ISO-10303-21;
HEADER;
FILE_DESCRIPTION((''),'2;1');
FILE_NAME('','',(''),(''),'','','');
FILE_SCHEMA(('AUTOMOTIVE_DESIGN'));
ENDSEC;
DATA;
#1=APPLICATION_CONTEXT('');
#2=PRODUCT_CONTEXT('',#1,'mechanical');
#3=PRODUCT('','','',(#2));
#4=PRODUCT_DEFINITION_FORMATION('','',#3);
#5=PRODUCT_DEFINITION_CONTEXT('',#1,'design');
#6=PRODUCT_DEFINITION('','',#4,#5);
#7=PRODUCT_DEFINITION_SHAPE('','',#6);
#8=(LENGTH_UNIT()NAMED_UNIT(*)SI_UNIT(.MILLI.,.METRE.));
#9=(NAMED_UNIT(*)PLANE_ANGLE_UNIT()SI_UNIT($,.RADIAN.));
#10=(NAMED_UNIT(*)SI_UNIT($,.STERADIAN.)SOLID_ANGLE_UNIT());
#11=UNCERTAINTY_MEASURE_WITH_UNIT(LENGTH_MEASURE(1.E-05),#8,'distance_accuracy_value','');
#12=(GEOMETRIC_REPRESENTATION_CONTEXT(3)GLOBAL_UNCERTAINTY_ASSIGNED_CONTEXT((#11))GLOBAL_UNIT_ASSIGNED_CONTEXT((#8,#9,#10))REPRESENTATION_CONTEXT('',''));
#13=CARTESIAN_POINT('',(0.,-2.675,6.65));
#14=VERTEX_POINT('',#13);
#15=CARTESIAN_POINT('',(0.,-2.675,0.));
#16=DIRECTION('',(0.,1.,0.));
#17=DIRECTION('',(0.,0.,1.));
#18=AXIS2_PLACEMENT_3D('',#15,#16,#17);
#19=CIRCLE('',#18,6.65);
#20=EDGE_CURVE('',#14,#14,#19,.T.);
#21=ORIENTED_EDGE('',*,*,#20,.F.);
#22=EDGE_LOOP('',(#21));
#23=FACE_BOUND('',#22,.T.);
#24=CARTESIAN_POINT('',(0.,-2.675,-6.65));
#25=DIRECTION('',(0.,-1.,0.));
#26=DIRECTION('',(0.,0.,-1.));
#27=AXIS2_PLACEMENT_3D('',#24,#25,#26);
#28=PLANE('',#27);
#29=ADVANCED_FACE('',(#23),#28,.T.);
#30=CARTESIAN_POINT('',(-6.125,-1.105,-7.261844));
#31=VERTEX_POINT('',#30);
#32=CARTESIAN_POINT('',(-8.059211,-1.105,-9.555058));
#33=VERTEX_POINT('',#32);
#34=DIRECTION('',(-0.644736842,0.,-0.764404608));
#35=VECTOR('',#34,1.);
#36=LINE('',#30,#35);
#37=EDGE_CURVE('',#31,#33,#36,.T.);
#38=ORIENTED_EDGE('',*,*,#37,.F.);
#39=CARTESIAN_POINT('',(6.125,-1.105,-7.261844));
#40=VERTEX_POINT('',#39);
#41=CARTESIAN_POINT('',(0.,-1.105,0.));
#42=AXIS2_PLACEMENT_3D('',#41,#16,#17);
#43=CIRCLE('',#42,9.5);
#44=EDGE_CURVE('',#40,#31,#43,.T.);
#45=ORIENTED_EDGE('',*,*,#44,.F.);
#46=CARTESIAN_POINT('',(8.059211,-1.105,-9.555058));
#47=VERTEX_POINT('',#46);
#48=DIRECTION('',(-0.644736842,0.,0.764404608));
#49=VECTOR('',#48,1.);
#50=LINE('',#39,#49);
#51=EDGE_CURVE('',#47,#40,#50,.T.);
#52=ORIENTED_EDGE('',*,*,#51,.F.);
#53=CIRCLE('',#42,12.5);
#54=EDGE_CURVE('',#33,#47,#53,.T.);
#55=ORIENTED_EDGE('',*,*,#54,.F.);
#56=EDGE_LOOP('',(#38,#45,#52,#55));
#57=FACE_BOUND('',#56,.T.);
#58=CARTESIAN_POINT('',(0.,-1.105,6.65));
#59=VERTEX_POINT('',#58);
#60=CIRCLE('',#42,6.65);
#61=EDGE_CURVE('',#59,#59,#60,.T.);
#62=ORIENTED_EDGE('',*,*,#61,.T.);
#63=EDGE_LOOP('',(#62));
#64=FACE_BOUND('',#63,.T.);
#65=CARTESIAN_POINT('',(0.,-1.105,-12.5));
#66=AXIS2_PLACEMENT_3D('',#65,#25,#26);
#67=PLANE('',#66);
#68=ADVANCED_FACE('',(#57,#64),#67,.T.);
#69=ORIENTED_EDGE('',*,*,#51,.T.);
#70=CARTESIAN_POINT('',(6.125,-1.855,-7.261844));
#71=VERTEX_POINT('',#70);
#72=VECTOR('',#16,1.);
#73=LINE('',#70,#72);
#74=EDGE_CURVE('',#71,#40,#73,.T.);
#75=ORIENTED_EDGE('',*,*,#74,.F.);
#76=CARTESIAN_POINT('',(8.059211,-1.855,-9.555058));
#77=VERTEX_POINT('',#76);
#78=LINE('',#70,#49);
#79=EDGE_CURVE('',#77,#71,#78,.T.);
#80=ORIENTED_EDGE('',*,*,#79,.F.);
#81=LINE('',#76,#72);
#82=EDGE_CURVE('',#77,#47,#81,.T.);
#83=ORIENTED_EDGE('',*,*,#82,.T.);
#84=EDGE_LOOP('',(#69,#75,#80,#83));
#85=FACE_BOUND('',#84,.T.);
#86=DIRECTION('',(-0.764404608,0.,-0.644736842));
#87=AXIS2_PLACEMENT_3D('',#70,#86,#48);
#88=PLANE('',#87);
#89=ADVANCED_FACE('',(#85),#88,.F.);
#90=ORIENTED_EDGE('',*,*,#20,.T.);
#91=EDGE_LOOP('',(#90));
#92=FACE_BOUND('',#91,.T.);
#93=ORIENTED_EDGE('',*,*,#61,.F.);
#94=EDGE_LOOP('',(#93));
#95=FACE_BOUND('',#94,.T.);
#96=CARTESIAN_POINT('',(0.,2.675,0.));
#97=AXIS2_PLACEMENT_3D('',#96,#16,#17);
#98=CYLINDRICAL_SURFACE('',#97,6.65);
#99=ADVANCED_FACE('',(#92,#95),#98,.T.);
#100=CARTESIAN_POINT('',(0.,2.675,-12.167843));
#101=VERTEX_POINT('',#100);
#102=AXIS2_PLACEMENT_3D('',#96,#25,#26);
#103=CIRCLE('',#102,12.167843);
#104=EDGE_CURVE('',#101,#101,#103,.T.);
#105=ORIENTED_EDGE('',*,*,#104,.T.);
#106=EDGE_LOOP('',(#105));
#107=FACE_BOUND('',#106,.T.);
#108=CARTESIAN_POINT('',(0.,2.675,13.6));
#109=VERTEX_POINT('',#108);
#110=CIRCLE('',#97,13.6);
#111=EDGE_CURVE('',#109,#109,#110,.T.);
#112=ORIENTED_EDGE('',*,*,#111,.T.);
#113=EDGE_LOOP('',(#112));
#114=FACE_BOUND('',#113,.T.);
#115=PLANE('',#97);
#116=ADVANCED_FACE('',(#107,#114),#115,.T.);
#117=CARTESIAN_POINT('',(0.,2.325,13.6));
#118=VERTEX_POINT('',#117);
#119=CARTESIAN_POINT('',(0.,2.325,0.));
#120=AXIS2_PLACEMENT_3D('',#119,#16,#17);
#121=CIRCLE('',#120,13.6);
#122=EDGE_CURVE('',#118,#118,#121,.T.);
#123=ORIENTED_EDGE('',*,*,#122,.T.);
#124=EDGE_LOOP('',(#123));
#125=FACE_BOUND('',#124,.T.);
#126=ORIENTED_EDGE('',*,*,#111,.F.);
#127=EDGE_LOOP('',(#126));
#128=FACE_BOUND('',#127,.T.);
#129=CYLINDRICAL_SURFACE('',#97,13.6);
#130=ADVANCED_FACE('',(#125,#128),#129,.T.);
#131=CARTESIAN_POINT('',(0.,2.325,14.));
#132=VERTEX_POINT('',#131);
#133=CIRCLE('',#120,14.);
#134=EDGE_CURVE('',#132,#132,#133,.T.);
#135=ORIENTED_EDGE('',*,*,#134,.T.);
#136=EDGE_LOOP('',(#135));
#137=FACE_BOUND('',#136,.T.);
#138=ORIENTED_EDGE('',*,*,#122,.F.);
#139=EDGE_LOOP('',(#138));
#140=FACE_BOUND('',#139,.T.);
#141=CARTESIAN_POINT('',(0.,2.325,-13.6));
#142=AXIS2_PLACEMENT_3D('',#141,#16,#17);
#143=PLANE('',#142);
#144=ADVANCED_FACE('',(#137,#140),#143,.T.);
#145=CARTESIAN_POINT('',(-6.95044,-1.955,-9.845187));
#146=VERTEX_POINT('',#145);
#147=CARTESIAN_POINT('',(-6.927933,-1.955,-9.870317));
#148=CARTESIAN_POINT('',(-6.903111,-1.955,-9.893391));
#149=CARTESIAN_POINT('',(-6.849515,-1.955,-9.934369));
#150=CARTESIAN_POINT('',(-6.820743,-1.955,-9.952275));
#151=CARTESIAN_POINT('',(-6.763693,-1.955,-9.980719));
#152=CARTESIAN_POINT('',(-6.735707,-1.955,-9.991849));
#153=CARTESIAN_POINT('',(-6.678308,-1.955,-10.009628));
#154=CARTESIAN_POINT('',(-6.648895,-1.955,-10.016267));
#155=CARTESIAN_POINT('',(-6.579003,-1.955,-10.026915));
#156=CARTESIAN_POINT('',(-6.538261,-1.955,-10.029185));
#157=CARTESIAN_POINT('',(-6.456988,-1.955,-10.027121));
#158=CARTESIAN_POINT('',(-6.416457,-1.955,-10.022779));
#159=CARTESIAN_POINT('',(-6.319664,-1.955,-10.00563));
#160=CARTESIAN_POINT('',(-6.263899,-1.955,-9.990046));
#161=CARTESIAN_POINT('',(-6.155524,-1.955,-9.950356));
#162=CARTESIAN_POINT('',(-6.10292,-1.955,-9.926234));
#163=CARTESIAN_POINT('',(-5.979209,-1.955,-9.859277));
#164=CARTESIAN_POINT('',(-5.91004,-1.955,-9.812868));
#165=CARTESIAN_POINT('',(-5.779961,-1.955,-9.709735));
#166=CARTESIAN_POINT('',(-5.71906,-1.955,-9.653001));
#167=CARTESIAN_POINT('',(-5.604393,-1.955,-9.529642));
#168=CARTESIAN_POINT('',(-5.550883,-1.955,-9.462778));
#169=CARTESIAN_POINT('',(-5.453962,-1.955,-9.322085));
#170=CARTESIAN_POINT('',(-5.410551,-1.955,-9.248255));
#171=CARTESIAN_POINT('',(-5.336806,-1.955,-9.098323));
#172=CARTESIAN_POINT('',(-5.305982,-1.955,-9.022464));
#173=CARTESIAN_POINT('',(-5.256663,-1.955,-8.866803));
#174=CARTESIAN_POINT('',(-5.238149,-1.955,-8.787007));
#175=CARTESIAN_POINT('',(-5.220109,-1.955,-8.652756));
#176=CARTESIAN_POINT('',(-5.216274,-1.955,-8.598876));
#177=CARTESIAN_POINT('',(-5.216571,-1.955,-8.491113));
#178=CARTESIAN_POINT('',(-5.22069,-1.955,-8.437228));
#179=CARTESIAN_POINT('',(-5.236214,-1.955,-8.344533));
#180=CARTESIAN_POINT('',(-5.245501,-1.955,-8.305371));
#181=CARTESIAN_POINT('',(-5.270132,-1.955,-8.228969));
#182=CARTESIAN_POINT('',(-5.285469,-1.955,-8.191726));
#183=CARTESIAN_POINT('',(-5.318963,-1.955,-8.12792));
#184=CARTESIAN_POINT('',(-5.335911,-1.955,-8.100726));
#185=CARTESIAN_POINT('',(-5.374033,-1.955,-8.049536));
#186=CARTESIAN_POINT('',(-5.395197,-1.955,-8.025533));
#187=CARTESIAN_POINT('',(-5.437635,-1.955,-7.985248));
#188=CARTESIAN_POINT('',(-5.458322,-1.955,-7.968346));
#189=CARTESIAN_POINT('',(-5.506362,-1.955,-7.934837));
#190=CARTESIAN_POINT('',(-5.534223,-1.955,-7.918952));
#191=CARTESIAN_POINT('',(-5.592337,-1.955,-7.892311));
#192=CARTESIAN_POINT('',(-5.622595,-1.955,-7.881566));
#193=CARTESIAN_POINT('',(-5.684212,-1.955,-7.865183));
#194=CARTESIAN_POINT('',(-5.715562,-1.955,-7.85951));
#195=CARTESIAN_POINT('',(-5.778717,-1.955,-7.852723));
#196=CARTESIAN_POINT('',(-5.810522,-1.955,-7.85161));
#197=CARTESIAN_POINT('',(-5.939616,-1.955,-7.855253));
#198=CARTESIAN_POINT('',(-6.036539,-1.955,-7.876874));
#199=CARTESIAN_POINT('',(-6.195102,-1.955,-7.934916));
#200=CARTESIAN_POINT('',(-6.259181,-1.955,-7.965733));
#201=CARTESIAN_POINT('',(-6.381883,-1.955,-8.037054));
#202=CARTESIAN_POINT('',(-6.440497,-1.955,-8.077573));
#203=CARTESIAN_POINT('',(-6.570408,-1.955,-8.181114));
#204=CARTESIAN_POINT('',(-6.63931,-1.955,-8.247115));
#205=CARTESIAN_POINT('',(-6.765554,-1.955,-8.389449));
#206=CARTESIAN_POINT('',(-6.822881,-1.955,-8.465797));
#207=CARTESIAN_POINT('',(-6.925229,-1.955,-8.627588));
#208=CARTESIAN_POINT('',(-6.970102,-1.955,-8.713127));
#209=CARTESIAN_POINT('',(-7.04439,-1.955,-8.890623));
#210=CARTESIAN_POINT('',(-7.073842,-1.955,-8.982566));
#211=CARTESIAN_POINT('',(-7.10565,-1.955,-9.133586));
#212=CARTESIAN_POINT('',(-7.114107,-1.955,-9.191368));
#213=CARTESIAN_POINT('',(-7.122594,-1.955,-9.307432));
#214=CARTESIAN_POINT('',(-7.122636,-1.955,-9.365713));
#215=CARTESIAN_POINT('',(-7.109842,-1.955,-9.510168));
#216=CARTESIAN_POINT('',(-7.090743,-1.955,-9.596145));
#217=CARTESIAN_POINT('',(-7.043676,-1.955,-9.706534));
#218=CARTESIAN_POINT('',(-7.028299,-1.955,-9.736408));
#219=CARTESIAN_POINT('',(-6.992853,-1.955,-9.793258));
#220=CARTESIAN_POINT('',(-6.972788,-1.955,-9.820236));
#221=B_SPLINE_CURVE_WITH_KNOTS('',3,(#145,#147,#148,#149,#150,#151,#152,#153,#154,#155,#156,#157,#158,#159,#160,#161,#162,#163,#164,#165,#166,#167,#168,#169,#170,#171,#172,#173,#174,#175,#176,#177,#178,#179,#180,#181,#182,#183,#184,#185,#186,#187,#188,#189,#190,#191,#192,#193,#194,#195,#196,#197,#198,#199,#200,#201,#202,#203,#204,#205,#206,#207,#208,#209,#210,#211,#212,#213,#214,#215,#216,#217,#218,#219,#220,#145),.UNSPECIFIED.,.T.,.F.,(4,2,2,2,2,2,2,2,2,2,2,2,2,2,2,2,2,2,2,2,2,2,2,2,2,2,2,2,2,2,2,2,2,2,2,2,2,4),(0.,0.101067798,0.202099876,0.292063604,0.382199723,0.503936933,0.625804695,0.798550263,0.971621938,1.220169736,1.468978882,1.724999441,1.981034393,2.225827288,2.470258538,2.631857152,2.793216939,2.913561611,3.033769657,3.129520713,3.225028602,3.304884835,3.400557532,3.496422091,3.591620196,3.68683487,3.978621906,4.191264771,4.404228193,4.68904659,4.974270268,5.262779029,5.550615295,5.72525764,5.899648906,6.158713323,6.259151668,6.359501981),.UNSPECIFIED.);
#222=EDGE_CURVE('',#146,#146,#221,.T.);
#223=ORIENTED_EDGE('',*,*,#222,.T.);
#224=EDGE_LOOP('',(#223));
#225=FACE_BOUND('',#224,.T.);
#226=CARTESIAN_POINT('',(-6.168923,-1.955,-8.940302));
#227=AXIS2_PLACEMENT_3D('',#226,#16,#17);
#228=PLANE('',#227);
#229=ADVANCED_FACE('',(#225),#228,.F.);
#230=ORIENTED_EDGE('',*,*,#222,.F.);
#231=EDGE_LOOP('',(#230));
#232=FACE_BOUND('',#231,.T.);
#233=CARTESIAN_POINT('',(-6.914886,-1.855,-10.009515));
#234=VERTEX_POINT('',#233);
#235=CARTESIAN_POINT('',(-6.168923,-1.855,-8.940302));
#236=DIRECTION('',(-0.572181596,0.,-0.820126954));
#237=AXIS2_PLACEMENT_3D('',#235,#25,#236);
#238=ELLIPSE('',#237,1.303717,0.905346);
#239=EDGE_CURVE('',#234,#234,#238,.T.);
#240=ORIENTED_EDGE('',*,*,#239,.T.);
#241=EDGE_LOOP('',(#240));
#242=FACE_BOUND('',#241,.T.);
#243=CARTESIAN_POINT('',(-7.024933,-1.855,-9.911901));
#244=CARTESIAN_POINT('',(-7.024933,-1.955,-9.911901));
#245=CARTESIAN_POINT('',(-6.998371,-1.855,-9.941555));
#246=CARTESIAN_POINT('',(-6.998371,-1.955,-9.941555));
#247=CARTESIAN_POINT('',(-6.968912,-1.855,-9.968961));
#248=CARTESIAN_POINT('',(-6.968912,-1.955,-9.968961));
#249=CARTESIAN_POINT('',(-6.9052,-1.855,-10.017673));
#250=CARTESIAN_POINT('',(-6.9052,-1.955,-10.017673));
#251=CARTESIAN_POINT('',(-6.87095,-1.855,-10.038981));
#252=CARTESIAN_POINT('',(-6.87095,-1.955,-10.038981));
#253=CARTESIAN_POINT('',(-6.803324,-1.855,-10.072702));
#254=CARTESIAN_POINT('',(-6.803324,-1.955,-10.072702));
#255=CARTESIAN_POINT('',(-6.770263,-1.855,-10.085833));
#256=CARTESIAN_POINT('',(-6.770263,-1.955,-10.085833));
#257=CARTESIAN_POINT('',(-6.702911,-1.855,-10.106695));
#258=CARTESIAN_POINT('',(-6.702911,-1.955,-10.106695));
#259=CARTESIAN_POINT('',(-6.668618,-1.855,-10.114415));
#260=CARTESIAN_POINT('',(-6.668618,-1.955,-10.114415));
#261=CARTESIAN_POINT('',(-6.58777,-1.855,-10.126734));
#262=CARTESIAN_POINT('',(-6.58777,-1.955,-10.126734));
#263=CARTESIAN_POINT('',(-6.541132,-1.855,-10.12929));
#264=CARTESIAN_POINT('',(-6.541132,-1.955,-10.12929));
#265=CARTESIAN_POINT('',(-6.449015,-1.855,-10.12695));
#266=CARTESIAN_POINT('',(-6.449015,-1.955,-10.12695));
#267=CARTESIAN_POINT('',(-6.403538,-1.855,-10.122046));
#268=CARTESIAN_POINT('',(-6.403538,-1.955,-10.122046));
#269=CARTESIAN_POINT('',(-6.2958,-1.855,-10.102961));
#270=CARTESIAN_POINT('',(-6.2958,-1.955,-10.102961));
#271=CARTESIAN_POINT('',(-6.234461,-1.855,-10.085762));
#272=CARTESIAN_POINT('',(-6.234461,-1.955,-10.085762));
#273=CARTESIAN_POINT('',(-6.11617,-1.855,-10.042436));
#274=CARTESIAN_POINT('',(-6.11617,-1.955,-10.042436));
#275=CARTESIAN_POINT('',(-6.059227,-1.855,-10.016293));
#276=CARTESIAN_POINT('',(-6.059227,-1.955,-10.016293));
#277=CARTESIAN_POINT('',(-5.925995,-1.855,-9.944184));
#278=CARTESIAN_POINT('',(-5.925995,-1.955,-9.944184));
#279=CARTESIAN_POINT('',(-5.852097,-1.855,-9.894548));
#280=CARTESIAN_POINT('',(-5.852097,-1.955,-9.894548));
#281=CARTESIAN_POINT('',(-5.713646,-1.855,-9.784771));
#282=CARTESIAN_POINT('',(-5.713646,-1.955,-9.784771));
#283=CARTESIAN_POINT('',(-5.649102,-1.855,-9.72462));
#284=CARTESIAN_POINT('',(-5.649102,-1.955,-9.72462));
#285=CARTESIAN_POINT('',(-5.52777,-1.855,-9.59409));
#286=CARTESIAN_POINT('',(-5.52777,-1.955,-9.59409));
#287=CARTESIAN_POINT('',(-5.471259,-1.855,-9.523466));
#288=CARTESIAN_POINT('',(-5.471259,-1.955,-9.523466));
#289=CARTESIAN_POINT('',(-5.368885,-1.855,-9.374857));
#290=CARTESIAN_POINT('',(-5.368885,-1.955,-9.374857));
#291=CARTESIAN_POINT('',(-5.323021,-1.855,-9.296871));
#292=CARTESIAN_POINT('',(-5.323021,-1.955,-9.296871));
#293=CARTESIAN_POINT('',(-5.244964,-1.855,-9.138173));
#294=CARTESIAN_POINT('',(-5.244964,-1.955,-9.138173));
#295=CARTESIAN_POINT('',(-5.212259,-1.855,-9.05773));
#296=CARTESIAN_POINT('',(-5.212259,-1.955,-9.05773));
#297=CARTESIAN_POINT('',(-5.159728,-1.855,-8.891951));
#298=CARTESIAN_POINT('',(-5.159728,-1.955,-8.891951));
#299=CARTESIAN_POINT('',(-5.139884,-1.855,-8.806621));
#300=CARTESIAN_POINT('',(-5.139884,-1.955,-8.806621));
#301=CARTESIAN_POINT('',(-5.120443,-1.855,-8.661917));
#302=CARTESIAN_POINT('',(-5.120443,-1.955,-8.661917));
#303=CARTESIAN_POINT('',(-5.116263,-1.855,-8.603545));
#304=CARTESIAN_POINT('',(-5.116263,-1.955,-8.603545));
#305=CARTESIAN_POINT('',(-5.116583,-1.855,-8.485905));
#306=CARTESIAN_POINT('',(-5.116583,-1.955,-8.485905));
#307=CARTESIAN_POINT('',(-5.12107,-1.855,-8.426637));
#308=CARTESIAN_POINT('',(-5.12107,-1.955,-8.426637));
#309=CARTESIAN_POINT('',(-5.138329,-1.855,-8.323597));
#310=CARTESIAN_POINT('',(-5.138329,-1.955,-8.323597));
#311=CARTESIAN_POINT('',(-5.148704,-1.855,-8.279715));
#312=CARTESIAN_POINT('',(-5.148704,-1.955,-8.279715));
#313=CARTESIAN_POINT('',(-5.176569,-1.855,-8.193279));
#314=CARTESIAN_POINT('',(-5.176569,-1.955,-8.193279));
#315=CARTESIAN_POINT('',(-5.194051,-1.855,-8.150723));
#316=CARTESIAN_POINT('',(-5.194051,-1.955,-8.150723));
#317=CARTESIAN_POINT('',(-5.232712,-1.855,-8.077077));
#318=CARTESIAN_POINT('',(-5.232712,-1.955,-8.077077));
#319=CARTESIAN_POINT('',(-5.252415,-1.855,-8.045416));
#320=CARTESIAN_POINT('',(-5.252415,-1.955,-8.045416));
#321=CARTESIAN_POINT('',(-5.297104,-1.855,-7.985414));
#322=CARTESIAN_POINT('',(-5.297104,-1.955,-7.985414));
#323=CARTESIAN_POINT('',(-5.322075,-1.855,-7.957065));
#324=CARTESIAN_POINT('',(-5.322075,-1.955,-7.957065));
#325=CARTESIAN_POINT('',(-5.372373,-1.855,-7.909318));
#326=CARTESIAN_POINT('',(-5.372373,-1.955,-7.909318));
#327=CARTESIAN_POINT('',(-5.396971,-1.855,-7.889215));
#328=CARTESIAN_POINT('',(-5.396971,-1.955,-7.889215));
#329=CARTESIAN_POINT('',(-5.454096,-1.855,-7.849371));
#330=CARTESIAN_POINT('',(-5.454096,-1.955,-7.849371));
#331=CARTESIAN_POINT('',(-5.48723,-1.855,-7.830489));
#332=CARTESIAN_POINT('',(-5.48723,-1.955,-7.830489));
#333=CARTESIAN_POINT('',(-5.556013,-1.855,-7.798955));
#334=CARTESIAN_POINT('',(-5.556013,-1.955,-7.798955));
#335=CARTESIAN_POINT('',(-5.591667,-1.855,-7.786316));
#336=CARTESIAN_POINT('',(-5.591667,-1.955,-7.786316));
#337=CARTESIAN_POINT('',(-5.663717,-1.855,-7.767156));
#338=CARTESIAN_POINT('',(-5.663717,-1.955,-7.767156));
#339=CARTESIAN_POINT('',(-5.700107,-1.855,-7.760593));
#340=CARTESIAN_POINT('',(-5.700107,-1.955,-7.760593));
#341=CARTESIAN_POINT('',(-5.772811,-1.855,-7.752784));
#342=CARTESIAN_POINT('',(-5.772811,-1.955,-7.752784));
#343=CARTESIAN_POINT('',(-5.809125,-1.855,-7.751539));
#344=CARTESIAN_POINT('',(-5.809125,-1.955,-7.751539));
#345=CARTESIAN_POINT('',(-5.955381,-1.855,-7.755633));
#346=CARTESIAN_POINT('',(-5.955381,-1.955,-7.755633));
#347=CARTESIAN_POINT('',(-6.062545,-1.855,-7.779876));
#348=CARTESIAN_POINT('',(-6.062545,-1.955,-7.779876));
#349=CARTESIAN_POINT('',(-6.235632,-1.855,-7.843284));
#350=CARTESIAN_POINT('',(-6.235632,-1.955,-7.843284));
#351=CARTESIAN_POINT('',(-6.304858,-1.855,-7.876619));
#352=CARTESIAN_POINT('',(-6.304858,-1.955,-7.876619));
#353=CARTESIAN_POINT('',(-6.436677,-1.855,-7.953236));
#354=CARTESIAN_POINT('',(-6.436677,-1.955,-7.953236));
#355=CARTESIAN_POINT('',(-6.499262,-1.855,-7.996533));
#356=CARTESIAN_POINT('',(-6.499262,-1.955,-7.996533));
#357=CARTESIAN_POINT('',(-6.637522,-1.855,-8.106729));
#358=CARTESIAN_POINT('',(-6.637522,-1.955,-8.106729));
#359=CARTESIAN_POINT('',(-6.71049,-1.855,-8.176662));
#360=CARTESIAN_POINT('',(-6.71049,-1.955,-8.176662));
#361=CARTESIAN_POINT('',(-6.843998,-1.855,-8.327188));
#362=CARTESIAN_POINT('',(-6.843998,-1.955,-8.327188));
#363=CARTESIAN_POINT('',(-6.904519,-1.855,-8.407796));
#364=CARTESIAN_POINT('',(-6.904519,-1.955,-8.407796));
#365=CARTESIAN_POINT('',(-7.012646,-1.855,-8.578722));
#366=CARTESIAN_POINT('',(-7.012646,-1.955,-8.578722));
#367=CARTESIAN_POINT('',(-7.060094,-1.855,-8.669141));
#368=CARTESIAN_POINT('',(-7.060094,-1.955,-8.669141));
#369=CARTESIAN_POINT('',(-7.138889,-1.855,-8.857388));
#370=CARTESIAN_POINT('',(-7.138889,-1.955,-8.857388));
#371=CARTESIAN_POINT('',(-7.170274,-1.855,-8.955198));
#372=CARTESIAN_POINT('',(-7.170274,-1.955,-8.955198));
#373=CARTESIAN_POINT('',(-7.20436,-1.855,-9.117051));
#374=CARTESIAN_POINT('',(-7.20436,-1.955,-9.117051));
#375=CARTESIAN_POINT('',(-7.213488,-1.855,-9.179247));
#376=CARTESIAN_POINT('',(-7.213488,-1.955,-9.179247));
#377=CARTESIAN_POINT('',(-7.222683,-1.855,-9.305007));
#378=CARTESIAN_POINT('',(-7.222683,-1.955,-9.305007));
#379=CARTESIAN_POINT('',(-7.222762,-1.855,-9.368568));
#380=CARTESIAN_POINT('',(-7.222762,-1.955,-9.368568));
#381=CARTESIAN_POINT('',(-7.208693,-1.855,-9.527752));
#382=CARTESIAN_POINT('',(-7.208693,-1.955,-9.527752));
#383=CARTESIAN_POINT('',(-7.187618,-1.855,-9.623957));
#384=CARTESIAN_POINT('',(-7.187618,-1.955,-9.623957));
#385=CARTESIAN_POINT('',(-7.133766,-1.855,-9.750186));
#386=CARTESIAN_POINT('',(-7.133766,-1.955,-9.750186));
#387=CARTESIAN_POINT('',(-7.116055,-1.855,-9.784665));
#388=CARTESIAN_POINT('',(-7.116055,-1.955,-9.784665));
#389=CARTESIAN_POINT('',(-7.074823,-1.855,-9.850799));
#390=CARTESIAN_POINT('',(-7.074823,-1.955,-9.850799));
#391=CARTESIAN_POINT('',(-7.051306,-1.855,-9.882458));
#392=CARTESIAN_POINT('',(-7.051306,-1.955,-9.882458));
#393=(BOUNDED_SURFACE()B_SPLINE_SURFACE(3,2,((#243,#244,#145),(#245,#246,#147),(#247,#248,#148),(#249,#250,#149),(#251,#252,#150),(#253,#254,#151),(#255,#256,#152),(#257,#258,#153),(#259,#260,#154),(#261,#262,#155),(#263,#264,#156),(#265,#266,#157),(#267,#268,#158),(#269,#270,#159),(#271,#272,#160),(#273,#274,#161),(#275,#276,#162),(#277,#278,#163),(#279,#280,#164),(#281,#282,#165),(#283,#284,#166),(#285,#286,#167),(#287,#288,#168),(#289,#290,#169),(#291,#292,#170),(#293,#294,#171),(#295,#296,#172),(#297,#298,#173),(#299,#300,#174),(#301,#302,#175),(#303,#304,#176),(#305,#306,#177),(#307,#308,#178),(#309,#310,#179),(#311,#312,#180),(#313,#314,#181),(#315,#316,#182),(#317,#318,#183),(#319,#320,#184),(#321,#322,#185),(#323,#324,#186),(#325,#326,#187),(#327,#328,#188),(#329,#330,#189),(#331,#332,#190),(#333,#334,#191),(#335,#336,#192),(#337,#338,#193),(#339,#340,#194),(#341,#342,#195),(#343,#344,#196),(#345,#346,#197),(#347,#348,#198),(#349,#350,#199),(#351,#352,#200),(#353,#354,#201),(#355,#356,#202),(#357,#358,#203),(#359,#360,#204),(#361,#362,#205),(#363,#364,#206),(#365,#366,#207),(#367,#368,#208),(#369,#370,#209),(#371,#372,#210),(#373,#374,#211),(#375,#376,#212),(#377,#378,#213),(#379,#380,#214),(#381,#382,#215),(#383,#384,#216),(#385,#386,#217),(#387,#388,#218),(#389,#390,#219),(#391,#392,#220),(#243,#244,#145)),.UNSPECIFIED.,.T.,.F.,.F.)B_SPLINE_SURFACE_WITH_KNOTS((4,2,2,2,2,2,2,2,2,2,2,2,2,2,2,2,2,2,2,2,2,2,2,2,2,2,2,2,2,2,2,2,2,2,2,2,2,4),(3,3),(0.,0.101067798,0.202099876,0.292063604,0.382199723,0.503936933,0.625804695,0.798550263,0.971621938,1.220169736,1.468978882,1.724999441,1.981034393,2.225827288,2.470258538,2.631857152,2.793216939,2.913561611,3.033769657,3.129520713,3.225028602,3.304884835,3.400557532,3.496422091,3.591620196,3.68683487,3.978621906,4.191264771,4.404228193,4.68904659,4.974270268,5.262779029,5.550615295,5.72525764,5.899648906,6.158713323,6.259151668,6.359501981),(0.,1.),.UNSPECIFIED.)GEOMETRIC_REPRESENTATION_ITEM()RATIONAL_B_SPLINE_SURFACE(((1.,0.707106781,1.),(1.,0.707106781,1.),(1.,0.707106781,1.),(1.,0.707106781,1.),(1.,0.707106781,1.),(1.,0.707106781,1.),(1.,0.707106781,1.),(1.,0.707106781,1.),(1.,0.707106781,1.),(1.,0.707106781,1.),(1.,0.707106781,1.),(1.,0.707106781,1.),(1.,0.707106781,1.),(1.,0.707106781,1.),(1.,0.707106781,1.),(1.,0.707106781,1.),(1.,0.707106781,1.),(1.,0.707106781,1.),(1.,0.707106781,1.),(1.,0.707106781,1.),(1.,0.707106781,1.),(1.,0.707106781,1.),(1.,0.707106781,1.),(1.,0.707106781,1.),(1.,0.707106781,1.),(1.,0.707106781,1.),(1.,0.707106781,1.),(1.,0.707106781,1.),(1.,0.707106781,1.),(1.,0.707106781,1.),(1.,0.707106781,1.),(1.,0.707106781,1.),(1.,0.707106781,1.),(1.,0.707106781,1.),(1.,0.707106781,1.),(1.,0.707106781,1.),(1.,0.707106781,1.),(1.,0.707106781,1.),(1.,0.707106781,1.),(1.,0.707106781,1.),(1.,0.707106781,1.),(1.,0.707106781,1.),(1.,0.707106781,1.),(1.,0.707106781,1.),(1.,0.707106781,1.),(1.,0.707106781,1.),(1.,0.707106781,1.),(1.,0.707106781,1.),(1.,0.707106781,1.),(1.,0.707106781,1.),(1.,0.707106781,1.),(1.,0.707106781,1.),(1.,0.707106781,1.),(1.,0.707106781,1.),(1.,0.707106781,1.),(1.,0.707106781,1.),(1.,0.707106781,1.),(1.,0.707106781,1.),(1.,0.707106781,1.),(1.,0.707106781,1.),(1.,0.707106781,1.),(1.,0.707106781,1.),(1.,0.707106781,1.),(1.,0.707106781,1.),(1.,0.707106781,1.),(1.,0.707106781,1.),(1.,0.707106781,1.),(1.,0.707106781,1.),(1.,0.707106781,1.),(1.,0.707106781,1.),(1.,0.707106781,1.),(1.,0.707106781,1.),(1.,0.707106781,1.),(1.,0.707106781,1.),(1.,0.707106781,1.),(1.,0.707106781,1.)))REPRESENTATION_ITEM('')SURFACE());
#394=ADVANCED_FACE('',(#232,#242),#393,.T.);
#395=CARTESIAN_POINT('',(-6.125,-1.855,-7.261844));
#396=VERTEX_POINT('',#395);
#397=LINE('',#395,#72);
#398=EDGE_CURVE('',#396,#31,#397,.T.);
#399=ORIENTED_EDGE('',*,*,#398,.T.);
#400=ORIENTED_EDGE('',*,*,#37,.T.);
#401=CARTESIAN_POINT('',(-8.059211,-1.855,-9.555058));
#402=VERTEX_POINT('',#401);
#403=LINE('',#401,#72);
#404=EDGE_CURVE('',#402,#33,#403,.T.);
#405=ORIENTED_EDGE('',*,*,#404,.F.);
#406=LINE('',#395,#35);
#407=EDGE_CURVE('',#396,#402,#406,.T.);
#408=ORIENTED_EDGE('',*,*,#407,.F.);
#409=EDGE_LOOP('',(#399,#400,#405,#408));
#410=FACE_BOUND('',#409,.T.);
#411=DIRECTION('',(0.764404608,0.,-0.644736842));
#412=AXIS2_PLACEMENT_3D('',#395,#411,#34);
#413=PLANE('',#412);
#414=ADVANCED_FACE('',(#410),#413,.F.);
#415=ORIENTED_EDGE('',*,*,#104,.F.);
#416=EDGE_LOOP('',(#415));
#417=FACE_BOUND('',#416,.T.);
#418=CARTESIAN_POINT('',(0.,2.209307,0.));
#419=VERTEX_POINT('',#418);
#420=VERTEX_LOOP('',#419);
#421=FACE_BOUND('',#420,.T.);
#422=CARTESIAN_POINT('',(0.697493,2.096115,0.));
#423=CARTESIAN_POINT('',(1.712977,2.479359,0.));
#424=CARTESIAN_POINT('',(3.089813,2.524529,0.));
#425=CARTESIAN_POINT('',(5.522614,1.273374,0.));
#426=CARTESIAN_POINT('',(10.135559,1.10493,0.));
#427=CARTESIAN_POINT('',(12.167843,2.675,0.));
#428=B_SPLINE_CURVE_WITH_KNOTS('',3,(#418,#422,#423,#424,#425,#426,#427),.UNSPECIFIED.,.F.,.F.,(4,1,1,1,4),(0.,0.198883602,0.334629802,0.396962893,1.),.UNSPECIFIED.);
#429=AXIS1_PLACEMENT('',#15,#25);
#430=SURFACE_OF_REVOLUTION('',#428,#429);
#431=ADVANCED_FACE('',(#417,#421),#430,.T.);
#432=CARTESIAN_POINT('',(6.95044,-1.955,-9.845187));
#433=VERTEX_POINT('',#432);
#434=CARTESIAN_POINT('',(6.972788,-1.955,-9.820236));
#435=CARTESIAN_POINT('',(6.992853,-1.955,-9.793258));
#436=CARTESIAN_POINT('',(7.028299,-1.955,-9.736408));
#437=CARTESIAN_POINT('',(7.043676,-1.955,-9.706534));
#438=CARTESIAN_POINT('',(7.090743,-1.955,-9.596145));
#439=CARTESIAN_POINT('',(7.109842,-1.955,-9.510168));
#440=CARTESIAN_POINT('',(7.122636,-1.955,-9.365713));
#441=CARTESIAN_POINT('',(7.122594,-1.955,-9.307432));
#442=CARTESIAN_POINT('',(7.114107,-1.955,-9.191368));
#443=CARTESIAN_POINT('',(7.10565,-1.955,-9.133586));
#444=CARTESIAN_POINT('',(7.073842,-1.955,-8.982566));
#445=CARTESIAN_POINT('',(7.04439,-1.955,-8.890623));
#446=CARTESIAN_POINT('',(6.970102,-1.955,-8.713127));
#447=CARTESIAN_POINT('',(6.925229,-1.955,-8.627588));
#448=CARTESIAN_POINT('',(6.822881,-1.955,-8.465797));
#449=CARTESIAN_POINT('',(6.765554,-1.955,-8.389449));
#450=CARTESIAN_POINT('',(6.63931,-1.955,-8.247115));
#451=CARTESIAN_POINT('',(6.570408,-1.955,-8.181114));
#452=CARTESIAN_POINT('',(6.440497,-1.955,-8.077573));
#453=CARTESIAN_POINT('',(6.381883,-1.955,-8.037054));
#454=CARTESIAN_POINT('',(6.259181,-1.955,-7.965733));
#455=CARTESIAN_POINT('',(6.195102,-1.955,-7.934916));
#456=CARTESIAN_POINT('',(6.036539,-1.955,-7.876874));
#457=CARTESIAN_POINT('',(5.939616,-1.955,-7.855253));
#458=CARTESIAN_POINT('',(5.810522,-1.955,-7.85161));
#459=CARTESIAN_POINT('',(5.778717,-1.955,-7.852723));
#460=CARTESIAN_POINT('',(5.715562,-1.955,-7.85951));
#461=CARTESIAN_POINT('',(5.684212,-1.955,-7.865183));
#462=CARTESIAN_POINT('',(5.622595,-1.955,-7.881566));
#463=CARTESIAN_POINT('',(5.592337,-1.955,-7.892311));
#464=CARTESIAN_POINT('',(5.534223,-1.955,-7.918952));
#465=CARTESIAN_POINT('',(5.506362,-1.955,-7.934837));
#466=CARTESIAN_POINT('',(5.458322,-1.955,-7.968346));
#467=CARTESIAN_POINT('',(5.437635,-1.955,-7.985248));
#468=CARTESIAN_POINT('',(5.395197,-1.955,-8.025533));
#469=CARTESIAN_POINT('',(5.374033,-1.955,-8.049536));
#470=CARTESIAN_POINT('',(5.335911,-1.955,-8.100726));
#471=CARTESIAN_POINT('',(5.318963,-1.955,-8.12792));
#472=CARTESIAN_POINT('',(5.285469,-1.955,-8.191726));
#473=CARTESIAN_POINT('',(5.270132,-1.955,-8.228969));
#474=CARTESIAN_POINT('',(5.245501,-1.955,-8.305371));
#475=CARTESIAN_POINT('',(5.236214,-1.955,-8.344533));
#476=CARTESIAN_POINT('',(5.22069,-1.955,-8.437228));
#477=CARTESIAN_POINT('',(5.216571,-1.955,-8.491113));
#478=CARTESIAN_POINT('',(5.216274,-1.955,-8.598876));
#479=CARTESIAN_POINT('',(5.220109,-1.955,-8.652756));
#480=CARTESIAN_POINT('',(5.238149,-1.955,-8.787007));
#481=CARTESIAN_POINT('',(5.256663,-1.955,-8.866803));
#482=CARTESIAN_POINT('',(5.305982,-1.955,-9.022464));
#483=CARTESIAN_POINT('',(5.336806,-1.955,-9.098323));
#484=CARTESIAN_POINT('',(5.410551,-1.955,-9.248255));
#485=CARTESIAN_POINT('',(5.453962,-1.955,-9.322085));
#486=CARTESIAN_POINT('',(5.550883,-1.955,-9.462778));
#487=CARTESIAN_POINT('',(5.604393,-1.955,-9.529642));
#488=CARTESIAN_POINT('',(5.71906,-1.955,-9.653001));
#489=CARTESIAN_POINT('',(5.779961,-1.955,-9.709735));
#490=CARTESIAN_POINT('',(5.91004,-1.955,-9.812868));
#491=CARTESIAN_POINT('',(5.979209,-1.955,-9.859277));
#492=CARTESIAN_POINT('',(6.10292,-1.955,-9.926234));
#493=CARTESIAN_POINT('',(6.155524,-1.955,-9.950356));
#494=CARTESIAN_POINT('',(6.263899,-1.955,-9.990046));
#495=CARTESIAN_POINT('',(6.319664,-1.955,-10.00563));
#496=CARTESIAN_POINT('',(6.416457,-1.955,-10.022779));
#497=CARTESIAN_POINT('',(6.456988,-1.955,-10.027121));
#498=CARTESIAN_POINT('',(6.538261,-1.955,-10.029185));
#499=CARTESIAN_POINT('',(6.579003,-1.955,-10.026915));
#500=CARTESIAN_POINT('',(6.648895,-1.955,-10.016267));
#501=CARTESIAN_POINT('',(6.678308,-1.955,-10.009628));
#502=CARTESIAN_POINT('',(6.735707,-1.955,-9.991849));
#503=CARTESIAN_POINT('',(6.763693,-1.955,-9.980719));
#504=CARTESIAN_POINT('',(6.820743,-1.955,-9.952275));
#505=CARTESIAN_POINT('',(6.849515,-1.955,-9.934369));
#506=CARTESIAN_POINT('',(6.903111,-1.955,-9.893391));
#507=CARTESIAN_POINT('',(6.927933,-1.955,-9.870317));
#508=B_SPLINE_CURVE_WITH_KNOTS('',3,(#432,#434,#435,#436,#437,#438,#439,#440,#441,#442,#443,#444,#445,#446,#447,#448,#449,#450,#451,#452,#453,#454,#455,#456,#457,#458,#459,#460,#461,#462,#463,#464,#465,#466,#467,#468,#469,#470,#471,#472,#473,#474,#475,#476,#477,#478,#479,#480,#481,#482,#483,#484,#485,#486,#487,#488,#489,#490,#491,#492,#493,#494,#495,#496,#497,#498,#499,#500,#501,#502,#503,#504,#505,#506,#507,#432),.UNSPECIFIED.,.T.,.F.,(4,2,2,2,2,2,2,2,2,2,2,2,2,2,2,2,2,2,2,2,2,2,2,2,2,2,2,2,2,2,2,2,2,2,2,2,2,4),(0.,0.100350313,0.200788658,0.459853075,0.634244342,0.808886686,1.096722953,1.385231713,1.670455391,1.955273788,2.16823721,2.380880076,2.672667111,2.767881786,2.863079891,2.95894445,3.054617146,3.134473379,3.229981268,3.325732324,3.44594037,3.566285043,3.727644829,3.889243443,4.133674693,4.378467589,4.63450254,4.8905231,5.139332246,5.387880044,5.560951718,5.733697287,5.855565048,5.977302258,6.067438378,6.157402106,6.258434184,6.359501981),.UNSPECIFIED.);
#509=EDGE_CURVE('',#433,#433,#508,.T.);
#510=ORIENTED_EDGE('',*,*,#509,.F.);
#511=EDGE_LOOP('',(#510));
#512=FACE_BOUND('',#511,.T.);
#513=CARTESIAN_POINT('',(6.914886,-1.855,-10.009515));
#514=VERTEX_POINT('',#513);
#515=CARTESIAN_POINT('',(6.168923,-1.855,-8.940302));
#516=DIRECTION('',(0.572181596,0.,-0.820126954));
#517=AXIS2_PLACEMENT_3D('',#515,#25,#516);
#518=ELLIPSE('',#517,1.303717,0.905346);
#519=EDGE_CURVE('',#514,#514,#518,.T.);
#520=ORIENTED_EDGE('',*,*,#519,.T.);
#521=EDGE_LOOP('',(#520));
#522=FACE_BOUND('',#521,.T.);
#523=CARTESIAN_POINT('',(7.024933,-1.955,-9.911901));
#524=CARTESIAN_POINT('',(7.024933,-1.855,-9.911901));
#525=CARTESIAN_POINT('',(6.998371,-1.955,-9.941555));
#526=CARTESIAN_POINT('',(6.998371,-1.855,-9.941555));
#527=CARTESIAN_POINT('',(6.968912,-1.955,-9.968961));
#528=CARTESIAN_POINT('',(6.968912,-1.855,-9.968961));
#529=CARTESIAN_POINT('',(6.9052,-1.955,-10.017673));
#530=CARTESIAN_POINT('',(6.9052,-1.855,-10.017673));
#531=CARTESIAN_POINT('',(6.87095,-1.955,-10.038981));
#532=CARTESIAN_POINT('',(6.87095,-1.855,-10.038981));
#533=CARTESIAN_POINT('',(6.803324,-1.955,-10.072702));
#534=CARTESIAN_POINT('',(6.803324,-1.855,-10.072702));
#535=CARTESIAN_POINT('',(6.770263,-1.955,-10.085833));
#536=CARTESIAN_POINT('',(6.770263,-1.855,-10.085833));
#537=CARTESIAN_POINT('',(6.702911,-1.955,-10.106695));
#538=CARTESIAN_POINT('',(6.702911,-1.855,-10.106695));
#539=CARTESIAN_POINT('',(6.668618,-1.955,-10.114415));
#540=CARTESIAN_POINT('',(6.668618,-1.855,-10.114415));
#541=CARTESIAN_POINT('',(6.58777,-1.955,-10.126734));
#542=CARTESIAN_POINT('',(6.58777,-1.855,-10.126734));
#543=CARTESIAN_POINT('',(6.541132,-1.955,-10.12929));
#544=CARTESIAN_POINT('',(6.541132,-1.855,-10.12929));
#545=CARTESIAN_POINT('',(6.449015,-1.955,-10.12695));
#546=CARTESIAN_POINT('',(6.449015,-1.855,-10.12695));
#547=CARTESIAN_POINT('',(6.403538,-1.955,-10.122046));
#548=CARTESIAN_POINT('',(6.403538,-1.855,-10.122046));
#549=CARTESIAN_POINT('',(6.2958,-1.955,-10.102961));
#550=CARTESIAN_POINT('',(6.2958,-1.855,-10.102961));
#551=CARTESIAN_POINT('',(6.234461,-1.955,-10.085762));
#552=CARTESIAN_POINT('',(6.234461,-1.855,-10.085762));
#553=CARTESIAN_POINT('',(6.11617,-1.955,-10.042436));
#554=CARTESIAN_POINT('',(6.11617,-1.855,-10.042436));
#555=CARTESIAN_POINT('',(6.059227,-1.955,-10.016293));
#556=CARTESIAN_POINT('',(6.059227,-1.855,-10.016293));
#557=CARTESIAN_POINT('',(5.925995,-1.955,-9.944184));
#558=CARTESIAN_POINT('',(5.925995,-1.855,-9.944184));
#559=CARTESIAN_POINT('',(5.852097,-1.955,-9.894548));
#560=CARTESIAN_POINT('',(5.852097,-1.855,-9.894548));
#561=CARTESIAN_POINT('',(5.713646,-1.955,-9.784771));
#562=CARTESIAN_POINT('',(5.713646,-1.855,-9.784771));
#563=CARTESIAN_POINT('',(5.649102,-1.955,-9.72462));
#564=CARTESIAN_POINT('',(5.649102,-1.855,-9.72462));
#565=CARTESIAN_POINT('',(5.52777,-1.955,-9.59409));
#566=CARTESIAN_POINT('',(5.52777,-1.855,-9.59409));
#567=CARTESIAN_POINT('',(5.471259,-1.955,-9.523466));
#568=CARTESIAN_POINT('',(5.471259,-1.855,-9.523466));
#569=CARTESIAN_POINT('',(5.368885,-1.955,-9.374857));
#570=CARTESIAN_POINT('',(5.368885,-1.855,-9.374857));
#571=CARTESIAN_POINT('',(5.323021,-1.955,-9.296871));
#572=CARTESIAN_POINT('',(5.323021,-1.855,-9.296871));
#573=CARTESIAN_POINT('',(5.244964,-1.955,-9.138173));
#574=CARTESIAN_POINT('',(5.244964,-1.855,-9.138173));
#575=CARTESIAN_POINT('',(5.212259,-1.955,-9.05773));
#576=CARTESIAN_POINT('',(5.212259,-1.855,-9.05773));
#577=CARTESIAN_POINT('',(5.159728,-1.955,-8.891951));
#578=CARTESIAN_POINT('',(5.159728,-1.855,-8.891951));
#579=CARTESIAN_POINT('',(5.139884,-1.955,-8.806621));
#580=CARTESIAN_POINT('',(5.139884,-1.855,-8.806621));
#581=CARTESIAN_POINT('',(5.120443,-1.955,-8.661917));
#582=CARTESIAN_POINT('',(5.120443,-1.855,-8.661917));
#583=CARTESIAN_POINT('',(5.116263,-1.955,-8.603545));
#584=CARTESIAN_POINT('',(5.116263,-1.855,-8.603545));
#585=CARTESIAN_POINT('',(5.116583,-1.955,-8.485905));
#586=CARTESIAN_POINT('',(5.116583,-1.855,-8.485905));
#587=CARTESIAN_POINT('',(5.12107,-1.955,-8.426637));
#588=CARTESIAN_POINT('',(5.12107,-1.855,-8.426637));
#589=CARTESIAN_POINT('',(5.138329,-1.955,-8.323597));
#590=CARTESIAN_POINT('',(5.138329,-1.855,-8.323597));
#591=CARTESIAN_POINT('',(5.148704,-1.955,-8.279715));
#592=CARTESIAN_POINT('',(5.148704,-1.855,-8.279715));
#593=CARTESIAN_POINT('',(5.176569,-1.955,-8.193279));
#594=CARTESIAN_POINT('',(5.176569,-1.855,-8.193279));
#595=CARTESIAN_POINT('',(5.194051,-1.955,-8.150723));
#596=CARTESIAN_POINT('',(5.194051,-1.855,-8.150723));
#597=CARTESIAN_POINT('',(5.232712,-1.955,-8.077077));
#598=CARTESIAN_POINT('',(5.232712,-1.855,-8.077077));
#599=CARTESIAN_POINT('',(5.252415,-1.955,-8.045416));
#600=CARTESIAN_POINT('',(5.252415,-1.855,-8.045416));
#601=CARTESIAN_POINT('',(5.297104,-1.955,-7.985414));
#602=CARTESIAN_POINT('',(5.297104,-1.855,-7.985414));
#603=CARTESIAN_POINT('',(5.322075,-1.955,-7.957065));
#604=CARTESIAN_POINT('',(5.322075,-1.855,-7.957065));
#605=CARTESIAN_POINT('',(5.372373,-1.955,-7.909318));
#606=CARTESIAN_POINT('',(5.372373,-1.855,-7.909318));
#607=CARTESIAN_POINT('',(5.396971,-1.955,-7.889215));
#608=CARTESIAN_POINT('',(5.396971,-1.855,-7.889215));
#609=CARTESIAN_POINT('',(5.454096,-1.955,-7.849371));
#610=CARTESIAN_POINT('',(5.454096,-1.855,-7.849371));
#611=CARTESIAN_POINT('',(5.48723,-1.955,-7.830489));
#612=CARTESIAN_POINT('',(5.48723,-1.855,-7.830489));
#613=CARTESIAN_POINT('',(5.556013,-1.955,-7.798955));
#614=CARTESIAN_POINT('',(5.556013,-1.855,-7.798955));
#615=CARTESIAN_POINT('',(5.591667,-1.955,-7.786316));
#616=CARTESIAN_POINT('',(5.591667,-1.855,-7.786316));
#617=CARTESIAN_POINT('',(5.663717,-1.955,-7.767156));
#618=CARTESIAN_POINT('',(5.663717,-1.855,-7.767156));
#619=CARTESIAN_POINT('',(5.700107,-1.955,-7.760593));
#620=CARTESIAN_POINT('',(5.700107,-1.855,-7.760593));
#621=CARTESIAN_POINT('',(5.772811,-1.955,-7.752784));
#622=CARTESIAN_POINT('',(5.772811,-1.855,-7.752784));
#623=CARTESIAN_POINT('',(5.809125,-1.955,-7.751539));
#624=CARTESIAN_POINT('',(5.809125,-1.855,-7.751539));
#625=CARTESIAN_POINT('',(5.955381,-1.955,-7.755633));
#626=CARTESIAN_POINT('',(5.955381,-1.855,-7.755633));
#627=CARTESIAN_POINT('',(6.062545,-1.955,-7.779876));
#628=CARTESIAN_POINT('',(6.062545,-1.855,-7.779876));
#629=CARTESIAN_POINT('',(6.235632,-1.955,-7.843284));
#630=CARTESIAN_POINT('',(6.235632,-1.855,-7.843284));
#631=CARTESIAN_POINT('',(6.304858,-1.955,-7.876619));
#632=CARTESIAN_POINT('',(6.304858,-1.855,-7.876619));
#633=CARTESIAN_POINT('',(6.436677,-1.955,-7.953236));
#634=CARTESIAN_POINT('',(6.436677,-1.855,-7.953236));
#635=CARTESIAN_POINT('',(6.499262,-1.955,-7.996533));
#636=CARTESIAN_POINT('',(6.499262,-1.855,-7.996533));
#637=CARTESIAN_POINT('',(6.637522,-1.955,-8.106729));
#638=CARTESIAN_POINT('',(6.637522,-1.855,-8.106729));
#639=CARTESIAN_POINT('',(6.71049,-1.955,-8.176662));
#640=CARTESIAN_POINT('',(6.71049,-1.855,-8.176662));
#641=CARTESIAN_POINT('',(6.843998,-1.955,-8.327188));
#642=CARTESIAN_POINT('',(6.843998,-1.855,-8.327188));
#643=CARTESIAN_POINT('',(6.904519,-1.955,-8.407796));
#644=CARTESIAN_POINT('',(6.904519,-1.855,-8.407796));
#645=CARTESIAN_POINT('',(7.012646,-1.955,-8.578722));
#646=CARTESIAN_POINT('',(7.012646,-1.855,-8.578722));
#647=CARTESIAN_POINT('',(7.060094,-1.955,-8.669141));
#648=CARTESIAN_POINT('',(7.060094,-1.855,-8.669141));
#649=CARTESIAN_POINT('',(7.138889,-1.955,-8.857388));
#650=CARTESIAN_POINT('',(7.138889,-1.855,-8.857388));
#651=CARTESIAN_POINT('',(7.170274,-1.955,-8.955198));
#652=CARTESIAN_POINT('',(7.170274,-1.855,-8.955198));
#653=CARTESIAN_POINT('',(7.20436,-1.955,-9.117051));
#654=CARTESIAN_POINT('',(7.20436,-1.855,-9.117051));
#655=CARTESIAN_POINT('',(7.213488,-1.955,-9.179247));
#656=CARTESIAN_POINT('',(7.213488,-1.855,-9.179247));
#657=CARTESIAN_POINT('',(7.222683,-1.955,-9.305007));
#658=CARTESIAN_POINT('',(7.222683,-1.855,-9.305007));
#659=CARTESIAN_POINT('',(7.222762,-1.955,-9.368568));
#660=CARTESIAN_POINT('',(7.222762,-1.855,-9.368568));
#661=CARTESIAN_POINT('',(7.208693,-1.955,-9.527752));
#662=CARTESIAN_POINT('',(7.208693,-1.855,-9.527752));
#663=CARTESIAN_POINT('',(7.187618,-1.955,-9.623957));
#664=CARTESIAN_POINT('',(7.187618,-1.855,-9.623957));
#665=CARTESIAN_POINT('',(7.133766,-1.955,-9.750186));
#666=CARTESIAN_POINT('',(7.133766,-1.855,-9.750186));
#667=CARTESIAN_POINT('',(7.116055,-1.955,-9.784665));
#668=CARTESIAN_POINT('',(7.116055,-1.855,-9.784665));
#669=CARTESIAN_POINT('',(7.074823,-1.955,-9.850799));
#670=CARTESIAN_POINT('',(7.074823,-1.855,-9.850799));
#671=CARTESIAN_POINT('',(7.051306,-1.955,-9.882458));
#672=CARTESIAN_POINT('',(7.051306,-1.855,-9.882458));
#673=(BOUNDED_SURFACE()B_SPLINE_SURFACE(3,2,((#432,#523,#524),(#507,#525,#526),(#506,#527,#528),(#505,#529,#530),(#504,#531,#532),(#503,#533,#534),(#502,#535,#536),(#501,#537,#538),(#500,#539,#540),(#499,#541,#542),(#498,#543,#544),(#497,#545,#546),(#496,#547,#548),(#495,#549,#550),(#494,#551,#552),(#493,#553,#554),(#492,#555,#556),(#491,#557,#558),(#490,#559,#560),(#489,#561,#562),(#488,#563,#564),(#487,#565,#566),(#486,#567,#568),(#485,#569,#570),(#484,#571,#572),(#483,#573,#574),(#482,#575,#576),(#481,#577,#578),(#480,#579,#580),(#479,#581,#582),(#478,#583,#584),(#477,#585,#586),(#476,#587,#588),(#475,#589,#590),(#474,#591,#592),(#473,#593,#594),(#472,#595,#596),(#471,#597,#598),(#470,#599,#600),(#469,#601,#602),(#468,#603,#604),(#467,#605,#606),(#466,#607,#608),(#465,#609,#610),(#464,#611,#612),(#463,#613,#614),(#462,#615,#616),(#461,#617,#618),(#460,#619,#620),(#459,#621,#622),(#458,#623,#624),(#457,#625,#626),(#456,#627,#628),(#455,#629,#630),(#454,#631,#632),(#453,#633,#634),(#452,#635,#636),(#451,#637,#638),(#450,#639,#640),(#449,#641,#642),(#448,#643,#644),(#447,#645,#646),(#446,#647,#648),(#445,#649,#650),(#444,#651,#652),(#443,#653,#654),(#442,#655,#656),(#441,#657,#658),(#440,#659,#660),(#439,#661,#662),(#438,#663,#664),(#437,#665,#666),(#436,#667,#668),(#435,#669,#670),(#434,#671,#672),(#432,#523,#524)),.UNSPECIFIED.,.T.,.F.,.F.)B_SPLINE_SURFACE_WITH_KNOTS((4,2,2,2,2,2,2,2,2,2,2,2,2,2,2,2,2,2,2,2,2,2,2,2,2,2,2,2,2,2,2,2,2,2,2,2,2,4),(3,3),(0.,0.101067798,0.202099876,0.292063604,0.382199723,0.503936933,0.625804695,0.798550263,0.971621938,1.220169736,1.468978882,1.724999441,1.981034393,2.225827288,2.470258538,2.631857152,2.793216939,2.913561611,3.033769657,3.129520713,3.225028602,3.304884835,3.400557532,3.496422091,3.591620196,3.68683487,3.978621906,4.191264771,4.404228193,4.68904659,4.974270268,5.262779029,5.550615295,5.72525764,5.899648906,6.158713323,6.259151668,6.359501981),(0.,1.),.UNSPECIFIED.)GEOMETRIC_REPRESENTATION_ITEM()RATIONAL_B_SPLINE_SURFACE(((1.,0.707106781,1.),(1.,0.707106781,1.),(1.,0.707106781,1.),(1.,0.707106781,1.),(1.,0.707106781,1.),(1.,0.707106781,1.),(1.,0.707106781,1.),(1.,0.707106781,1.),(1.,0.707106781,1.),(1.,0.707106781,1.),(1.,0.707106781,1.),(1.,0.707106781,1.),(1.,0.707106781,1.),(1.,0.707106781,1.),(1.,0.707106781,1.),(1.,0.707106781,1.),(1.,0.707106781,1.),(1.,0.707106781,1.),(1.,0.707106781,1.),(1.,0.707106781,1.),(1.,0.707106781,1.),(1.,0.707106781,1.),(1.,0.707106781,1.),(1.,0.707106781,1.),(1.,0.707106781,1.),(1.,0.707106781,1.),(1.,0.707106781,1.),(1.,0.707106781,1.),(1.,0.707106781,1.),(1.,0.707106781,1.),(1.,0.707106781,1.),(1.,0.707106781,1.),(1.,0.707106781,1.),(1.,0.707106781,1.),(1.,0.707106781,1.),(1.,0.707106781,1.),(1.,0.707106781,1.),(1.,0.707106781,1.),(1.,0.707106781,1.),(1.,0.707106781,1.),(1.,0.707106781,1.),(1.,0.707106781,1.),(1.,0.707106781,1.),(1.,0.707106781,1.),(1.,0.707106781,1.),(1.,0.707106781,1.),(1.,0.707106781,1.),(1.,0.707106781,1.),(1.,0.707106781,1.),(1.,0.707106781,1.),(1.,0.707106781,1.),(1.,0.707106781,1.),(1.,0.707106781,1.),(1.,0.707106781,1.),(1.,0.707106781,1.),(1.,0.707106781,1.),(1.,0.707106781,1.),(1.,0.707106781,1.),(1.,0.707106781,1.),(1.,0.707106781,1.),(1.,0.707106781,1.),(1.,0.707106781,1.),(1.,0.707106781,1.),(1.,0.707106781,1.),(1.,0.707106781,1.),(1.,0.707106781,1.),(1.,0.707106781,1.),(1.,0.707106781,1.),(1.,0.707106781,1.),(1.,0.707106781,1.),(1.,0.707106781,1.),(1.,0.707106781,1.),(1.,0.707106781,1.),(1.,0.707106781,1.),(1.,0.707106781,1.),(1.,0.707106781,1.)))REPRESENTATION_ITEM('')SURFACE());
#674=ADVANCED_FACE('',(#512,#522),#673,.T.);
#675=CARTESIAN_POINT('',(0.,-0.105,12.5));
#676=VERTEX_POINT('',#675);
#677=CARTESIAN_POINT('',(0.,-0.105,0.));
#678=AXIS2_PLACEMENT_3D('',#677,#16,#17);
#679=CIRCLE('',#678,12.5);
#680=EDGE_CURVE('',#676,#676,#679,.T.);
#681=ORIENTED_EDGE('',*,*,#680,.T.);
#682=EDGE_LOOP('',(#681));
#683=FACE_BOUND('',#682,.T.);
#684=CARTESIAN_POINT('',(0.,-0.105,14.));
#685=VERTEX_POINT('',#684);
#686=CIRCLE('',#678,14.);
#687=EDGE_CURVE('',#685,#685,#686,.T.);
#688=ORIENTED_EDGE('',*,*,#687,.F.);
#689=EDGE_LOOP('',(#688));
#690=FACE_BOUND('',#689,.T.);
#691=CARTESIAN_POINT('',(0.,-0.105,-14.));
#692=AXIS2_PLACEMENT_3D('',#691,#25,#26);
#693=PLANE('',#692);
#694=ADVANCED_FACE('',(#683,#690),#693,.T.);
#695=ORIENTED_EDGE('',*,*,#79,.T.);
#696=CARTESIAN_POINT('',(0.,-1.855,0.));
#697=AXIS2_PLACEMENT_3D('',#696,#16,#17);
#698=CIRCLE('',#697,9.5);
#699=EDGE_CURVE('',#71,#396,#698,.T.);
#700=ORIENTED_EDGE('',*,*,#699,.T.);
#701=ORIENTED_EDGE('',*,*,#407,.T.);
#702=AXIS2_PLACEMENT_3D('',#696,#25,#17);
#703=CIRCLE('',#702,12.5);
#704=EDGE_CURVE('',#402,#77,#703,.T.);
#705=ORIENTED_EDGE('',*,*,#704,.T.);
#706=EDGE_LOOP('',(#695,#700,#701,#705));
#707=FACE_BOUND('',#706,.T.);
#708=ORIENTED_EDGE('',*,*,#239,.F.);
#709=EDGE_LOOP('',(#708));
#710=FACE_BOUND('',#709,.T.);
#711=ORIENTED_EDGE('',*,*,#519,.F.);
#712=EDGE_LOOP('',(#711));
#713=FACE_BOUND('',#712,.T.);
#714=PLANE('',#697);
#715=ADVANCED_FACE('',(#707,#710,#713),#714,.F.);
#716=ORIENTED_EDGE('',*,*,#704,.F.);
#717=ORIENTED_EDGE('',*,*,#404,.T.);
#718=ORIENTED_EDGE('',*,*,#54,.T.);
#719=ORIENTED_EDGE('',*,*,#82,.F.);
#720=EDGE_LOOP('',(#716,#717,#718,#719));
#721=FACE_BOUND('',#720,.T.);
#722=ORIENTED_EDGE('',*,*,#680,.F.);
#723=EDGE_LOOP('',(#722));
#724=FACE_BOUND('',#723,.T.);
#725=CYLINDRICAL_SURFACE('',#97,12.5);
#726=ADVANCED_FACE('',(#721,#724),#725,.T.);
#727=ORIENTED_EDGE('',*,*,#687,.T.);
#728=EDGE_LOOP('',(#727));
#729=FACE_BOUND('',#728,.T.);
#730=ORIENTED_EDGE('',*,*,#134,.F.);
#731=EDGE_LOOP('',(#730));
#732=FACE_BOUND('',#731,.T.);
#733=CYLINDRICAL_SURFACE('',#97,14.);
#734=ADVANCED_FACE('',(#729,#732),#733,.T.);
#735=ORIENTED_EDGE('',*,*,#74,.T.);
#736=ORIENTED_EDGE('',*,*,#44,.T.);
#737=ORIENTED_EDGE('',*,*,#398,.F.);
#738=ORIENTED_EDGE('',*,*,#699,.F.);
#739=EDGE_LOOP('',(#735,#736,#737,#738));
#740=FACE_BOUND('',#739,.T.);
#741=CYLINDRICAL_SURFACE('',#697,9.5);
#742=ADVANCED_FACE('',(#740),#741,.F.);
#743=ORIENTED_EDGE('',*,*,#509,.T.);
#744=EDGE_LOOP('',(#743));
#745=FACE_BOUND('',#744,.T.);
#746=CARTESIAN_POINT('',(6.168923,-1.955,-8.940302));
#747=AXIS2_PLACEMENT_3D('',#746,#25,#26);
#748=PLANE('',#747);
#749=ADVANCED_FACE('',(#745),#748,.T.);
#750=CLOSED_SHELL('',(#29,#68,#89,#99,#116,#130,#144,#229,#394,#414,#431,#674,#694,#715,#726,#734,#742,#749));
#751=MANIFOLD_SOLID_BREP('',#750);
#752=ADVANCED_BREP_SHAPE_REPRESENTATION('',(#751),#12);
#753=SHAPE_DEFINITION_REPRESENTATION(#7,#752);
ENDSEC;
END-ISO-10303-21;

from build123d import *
from build123d.topology import SkipClean

# Parameters (mm, degrees)
BOSS_EXTRUDE1_DEPTH = 0.75
SKETCH4_RX          = 1.303717269
SKETCH4_RY          = 0.905346041
BOSS_EXTRUDE2_DEPTH = 0.1
FILLET1_R           = 0.1


with BuildPart() as part:
    # Sketch1 → Revolve1 (revolve)
    with BuildSketch(Plane(origin=(0, 0, 0), x_dir=(0, 0, -1), z_dir=(1, 0, 0)), mode=Mode.PRIVATE) as revolve1_sk:
        Polygon((0, 2.675), (0, -2.675), (6.65, -2.675), (6.65, -1.105), (12.5, -1.105), (12.5, -0.105), (14, -0.105), (14, 2.325), (13.6, 2.325), (13.6, 2.675), align=None)
    revolve(revolve1_sk.sketch.rotate(Axis((0, 2.675, 0), (0, -1, 0)), 180), axis=Axis((0, 2.675, 0), (0, -1, 0)))

    # Sketch2 → Cut-Revolve1 (revolve, cut)
    with BuildSketch(Plane.XY):
        with BuildLine():
            Line((12.167843198, 2.675), (12.167843198, 4.188369308))
            Line((12.167843198, 4.188369308), (0, 4.188369308))
            Line((0, 4.188369308), (0, 2.20930679))
            add(Edge.make_bspline(
                [(0, 2.20930679), (0.697493383, 2.096114571), (1.712976925, 2.479358765), (3.089812768, 2.524529264), (5.522613834, 1.273374007), (10.13555892, 1.104929536), (12.167843198, 2.675)],
                knots=[0, 0, 0, 0, 0.198883602, 0.334629802, 0.396962893, 1, 1, 1, 1], degree=3))
        make_face()
    revolve(axis=Axis((0, -2.675, 0), (0, 1, 0)), mode=Mode.SUBTRACT)

    # Sketch3 → Boss-Extrude1 (add)
    with SkipClean():  # the faces are left unmerged after this step: merging them gives an invalid solid
        with BuildSketch(Plane.XZ.offset(1.105)):
            with BuildLine():
                Line((6.125, -7.261843774), (8.059210526, -9.555057598))
                ThreePointArc((8.059210526, -9.555057598), (0, -12.5), (-8.059210526, -9.555057598))
                Line((-8.059210526, -9.555057598), (-6.125, -7.261843774))
                ThreePointArc((-6.125, -7.261843774), (0, -9.5), (6.125, -7.261843774))
            make_face()
        extrude(amount=BOSS_EXTRUDE1_DEPTH)

    # Sketch4 → Boss-Extrude2 (add)
    with SkipClean():  # the faces are left unmerged after this step: merging them gives an invalid solid
        with BuildSketch(Plane.XZ.offset(1.855)):
            with Locations(Location((6.168922757, -8.940301825), (0, 0, -55.097504384))):
                Ellipse(SKETCH4_RX, SKETCH4_RY)
            with Locations(Location((-6.168922757, -8.940301825), (0, 0, -124.902495616))):
                Ellipse(SKETCH4_RX, SKETCH4_RY)
        extrude(amount=BOSS_EXTRUDE2_DEPTH)

    # Fillet1
    fillet1_edges = [part.edges().sort_by_distance(p)[0] for p in [
        (5.42295973, -1.955, -7.871088152),
        (-5.42295973, -1.955, -7.871088152),
    ]]
    fillet(fillet1_edges, radius=FILLET1_R - 0.0001)  # a hair under: the kernel refuses the full size


solid = part.part
